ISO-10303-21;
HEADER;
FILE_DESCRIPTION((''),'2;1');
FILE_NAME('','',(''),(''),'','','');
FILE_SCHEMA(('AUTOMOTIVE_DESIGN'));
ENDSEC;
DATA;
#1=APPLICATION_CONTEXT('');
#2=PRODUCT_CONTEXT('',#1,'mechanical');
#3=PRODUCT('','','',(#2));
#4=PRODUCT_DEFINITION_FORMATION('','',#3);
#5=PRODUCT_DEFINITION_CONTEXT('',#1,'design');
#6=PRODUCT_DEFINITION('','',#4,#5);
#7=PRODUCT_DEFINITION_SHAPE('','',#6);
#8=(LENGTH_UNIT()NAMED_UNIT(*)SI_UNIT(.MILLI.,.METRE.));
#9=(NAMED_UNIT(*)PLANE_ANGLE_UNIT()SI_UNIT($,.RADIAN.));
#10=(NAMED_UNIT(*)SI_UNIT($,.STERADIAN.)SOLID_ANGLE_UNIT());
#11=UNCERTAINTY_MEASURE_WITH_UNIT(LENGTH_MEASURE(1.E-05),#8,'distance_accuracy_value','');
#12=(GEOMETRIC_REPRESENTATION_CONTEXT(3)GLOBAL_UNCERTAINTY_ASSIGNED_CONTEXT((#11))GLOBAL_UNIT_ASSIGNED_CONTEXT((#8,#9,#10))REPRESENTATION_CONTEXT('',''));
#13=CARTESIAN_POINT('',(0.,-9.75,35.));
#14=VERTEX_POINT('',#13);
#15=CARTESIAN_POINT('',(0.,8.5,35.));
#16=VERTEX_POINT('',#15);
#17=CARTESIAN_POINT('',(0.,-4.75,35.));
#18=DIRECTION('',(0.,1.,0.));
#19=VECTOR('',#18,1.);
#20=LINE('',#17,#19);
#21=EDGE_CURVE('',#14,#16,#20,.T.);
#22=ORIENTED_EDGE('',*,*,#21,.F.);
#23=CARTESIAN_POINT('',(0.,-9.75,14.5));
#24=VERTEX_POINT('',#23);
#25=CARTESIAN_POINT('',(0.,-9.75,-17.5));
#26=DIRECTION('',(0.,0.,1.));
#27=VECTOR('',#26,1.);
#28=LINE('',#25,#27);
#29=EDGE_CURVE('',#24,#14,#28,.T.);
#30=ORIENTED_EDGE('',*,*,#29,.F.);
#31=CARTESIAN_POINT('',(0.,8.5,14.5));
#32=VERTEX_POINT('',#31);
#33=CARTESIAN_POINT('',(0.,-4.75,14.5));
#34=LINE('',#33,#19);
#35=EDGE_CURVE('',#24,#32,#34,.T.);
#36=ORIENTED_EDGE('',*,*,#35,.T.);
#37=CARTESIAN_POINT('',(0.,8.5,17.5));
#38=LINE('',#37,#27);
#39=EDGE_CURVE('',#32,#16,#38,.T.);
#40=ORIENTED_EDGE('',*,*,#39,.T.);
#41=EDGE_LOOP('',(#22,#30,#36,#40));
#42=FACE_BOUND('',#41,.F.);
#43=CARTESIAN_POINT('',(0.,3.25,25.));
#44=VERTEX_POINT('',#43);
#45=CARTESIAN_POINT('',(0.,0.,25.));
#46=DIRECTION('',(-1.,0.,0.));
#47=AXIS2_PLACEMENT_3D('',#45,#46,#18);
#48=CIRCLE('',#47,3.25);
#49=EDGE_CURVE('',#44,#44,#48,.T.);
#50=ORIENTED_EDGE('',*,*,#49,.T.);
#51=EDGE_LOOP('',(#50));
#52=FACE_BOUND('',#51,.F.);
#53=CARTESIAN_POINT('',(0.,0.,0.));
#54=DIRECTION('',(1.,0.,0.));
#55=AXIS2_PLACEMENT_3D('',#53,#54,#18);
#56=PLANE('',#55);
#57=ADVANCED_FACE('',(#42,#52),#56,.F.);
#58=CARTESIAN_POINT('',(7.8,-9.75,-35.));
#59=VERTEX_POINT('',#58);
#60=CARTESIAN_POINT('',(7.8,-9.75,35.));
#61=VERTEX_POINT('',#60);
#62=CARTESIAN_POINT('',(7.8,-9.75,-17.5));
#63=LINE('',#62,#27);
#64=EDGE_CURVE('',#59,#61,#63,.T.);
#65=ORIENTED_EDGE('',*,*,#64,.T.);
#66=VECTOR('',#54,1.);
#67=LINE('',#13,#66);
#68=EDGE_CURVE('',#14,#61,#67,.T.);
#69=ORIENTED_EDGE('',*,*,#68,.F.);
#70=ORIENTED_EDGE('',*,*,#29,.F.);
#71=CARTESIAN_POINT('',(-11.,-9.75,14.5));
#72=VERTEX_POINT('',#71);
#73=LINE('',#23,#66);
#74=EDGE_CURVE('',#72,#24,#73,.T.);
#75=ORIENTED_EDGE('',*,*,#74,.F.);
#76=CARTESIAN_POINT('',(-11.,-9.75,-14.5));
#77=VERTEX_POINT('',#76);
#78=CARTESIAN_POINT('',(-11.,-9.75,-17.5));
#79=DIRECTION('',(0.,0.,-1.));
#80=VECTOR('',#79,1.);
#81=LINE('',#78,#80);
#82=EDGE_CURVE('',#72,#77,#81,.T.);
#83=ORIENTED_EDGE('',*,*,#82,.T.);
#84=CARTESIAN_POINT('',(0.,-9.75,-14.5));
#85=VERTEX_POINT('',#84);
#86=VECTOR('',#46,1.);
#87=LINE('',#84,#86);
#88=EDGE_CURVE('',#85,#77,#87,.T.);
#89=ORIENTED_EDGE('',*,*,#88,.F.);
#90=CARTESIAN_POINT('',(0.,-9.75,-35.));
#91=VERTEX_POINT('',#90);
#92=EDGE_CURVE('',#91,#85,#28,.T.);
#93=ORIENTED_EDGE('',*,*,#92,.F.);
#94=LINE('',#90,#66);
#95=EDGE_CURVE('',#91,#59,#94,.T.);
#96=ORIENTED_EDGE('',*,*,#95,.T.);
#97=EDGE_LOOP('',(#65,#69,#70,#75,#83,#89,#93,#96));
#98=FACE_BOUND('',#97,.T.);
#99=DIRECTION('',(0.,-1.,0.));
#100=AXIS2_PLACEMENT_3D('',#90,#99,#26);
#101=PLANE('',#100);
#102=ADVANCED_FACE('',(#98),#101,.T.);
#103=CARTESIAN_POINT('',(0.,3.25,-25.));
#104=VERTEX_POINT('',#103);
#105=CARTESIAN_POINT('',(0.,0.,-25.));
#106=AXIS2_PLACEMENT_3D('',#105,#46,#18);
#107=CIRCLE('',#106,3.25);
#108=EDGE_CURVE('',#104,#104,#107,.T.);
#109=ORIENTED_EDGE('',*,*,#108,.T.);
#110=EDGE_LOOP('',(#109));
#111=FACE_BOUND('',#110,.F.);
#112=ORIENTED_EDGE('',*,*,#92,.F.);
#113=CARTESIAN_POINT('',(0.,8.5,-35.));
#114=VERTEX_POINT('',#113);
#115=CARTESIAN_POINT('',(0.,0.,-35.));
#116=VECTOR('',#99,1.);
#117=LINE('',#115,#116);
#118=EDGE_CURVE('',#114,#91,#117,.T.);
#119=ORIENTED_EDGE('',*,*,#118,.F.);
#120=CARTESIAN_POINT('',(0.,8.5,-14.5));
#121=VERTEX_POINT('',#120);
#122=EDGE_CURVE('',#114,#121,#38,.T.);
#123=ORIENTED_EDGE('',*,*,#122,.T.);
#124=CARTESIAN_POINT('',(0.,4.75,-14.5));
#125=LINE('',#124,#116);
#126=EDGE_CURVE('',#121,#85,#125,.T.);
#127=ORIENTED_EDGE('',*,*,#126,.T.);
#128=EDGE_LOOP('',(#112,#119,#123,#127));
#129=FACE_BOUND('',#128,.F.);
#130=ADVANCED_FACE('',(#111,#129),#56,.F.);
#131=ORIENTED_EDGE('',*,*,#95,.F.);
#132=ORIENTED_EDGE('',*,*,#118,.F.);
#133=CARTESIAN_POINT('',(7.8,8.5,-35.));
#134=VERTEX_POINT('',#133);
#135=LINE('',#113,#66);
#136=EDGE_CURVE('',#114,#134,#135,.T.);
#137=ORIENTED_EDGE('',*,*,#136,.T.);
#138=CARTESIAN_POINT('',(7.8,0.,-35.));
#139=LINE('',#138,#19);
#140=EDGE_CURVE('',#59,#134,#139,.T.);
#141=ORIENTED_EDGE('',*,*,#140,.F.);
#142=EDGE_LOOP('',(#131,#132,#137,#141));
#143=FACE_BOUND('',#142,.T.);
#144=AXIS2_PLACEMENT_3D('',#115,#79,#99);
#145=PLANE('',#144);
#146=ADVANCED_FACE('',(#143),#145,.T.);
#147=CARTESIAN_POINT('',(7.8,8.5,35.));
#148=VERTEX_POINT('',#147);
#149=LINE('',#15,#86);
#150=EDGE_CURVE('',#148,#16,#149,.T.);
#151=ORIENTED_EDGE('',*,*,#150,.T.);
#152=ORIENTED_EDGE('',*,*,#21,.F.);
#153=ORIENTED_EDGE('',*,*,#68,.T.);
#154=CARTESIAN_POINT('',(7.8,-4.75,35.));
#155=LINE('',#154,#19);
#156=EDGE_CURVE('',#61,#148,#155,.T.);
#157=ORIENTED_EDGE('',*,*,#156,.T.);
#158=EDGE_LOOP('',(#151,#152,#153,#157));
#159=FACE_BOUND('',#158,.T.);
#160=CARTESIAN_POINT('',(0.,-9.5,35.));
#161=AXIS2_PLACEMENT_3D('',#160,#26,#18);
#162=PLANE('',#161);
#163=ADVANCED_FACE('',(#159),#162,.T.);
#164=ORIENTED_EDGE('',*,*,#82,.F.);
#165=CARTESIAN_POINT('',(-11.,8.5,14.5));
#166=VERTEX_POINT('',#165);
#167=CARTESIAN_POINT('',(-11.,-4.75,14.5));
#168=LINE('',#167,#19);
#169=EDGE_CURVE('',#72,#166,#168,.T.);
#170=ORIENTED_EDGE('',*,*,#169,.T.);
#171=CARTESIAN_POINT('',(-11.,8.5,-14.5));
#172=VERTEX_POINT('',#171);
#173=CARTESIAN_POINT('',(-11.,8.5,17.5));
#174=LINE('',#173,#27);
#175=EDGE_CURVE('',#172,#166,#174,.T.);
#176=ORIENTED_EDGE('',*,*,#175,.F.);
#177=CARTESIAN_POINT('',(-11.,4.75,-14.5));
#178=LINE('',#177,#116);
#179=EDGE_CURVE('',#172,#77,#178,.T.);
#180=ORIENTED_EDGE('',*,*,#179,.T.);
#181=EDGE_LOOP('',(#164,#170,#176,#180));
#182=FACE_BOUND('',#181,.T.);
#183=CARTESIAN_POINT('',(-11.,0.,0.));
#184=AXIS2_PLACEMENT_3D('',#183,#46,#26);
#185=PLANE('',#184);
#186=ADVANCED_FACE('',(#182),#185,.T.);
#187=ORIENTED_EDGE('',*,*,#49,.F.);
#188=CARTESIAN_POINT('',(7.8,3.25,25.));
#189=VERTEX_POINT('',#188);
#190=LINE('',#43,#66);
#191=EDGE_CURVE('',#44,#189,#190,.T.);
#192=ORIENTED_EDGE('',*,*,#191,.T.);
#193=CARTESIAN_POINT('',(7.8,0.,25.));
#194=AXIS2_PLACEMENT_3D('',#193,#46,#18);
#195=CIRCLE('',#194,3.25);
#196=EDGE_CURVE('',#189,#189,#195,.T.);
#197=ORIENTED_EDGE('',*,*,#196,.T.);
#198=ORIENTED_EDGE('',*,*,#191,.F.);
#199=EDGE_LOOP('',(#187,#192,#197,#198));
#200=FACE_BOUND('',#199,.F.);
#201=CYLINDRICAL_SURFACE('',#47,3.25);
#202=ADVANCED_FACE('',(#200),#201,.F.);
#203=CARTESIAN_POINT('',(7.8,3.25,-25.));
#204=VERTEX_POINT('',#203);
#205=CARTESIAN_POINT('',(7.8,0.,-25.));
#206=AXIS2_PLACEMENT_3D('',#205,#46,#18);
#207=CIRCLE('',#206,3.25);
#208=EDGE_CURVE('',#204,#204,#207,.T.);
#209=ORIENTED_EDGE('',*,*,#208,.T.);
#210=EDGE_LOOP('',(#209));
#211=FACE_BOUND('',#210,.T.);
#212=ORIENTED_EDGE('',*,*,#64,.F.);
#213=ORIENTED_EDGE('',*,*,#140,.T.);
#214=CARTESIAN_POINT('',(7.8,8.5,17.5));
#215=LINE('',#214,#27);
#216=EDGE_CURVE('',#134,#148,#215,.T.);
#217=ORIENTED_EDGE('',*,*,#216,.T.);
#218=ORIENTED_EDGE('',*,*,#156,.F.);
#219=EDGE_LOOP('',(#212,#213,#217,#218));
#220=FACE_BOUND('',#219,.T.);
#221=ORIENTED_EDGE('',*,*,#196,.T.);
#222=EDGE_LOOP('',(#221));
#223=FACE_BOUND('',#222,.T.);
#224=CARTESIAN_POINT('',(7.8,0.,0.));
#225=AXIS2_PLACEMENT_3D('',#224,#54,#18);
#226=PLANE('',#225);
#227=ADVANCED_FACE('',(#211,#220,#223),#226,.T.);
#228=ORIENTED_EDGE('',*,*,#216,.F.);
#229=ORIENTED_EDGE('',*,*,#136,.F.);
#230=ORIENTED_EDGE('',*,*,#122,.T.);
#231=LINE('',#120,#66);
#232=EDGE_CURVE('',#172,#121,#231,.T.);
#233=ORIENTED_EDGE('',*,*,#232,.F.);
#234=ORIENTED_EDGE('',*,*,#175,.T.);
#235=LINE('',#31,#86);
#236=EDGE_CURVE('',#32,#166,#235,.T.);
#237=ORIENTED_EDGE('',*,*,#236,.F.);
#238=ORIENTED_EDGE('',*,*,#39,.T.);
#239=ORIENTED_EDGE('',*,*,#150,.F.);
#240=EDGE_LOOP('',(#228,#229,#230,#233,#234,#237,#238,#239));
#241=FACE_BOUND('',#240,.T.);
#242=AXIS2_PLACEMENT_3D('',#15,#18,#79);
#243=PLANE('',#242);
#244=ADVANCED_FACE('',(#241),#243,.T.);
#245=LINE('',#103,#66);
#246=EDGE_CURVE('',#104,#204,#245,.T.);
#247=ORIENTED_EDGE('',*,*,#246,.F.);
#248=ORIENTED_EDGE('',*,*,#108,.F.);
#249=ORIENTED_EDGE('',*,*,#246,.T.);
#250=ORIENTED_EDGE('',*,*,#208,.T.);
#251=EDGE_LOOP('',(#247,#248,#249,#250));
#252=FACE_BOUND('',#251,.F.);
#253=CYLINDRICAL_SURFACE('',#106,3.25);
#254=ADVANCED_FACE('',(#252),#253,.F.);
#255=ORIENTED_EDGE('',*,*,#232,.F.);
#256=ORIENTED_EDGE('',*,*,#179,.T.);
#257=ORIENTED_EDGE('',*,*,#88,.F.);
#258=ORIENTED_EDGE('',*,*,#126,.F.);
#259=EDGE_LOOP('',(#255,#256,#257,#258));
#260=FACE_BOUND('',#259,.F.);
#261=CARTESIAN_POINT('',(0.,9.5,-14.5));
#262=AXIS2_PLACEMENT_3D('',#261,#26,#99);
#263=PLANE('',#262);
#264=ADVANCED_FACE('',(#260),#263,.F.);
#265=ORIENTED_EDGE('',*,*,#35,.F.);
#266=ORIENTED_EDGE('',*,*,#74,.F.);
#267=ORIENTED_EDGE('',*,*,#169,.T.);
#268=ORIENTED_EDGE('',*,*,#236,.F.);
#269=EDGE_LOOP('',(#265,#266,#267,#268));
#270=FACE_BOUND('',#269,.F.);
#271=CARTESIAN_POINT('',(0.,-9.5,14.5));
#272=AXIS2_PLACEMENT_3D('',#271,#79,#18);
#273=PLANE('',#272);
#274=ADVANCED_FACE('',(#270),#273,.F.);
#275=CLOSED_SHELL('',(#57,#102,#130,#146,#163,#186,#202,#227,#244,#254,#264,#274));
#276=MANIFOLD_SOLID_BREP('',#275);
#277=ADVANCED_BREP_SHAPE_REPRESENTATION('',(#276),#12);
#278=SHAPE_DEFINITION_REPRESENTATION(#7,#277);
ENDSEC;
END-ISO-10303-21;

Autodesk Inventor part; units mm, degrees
ref_plane "YZ Plane" through (0, 0, 0) normal (1, 0, 0) x (0, 1, 0)
ref_plane "XZ Plane" through (0, 0, 0) normal (0, 1, 0) x (-1, 0, 0)
ref_plane "XY Plane" through (0, 0, 0) normal (0, 0, 1) x (1, 0, 0)
sketch "Эскиз1" plane through (0, 0, 0) normal (1, 0, 0) x (0, 1, 0)
  line L0 (-9.5, 35) -> (9.5, 35)
  line L1 (9.5, 35) -> (9.5, -35)
  line L2 (9.5, -35) -> (-9.5, -35)
  line L3 (-9.5, -35) -> (-9.5, 35)
  line L4 (-9.5, 35) -> (9.5, -35) construction
  line L5 (9.5, 35) -> (-9.5, -35) construction
  line L6 (0, 35) -> (0, 25)
  circle A0 centre (0, 25) radius 3.25
  line L7 (0, -35) -> (0, -25)
  circle A1 centre (0, -25) radius 3.25
  point P0 (0, 0)
  dimension "d0" = 19
  dimension "d1" = 70
  dimension "d2" = 10
  dimension "d3" = 6.5
  dimension "d4" = 10
  dimension "d5" = 6.5
extrude "Выдавливание1" add sketch "Эскиз1" along normal blind 7.8
sketch "Эскиз2" plane through (0, 0, 0) normal (-1, 0, 0) x (0, 0, 1)
  line L0 (-35, 9.5) -> (35, 9.5) projected
  line L1 (-14.5, -9.5) -> (14.5, -9.5)
  line L2 (14.5, -9.5) -> (14.5, 9.5)
  line L3 (14.5, 9.5) -> (-14.5, 9.5)
  line L4 (-14.5, 9.5) -> (-14.5, -9.5)
  line L5 (-14.5, -9.5) -> (14.5, 9.5) construction
  line L6 (14.5, -9.5) -> (-14.5, 9.5) construction
  point P0 (0, 0)
  dimension "d8" = 29
extrude "Выдавливание2" add sketch "Эскиз2" along normal blind 11
move faces "Перенос1" translate (0, -0.25, 0) faces at (5.2, -9.5, -4.8333)
move faces "Перенос3" translate (0, -1, 0) faces at (5.2, 9.5, 4.8333)
equation "\"d4\" = d2"
equation "\"d5\" = d3"
properties part number "КВ33.044.202 - Фиксатор каретки" material "Пластик АБС"
